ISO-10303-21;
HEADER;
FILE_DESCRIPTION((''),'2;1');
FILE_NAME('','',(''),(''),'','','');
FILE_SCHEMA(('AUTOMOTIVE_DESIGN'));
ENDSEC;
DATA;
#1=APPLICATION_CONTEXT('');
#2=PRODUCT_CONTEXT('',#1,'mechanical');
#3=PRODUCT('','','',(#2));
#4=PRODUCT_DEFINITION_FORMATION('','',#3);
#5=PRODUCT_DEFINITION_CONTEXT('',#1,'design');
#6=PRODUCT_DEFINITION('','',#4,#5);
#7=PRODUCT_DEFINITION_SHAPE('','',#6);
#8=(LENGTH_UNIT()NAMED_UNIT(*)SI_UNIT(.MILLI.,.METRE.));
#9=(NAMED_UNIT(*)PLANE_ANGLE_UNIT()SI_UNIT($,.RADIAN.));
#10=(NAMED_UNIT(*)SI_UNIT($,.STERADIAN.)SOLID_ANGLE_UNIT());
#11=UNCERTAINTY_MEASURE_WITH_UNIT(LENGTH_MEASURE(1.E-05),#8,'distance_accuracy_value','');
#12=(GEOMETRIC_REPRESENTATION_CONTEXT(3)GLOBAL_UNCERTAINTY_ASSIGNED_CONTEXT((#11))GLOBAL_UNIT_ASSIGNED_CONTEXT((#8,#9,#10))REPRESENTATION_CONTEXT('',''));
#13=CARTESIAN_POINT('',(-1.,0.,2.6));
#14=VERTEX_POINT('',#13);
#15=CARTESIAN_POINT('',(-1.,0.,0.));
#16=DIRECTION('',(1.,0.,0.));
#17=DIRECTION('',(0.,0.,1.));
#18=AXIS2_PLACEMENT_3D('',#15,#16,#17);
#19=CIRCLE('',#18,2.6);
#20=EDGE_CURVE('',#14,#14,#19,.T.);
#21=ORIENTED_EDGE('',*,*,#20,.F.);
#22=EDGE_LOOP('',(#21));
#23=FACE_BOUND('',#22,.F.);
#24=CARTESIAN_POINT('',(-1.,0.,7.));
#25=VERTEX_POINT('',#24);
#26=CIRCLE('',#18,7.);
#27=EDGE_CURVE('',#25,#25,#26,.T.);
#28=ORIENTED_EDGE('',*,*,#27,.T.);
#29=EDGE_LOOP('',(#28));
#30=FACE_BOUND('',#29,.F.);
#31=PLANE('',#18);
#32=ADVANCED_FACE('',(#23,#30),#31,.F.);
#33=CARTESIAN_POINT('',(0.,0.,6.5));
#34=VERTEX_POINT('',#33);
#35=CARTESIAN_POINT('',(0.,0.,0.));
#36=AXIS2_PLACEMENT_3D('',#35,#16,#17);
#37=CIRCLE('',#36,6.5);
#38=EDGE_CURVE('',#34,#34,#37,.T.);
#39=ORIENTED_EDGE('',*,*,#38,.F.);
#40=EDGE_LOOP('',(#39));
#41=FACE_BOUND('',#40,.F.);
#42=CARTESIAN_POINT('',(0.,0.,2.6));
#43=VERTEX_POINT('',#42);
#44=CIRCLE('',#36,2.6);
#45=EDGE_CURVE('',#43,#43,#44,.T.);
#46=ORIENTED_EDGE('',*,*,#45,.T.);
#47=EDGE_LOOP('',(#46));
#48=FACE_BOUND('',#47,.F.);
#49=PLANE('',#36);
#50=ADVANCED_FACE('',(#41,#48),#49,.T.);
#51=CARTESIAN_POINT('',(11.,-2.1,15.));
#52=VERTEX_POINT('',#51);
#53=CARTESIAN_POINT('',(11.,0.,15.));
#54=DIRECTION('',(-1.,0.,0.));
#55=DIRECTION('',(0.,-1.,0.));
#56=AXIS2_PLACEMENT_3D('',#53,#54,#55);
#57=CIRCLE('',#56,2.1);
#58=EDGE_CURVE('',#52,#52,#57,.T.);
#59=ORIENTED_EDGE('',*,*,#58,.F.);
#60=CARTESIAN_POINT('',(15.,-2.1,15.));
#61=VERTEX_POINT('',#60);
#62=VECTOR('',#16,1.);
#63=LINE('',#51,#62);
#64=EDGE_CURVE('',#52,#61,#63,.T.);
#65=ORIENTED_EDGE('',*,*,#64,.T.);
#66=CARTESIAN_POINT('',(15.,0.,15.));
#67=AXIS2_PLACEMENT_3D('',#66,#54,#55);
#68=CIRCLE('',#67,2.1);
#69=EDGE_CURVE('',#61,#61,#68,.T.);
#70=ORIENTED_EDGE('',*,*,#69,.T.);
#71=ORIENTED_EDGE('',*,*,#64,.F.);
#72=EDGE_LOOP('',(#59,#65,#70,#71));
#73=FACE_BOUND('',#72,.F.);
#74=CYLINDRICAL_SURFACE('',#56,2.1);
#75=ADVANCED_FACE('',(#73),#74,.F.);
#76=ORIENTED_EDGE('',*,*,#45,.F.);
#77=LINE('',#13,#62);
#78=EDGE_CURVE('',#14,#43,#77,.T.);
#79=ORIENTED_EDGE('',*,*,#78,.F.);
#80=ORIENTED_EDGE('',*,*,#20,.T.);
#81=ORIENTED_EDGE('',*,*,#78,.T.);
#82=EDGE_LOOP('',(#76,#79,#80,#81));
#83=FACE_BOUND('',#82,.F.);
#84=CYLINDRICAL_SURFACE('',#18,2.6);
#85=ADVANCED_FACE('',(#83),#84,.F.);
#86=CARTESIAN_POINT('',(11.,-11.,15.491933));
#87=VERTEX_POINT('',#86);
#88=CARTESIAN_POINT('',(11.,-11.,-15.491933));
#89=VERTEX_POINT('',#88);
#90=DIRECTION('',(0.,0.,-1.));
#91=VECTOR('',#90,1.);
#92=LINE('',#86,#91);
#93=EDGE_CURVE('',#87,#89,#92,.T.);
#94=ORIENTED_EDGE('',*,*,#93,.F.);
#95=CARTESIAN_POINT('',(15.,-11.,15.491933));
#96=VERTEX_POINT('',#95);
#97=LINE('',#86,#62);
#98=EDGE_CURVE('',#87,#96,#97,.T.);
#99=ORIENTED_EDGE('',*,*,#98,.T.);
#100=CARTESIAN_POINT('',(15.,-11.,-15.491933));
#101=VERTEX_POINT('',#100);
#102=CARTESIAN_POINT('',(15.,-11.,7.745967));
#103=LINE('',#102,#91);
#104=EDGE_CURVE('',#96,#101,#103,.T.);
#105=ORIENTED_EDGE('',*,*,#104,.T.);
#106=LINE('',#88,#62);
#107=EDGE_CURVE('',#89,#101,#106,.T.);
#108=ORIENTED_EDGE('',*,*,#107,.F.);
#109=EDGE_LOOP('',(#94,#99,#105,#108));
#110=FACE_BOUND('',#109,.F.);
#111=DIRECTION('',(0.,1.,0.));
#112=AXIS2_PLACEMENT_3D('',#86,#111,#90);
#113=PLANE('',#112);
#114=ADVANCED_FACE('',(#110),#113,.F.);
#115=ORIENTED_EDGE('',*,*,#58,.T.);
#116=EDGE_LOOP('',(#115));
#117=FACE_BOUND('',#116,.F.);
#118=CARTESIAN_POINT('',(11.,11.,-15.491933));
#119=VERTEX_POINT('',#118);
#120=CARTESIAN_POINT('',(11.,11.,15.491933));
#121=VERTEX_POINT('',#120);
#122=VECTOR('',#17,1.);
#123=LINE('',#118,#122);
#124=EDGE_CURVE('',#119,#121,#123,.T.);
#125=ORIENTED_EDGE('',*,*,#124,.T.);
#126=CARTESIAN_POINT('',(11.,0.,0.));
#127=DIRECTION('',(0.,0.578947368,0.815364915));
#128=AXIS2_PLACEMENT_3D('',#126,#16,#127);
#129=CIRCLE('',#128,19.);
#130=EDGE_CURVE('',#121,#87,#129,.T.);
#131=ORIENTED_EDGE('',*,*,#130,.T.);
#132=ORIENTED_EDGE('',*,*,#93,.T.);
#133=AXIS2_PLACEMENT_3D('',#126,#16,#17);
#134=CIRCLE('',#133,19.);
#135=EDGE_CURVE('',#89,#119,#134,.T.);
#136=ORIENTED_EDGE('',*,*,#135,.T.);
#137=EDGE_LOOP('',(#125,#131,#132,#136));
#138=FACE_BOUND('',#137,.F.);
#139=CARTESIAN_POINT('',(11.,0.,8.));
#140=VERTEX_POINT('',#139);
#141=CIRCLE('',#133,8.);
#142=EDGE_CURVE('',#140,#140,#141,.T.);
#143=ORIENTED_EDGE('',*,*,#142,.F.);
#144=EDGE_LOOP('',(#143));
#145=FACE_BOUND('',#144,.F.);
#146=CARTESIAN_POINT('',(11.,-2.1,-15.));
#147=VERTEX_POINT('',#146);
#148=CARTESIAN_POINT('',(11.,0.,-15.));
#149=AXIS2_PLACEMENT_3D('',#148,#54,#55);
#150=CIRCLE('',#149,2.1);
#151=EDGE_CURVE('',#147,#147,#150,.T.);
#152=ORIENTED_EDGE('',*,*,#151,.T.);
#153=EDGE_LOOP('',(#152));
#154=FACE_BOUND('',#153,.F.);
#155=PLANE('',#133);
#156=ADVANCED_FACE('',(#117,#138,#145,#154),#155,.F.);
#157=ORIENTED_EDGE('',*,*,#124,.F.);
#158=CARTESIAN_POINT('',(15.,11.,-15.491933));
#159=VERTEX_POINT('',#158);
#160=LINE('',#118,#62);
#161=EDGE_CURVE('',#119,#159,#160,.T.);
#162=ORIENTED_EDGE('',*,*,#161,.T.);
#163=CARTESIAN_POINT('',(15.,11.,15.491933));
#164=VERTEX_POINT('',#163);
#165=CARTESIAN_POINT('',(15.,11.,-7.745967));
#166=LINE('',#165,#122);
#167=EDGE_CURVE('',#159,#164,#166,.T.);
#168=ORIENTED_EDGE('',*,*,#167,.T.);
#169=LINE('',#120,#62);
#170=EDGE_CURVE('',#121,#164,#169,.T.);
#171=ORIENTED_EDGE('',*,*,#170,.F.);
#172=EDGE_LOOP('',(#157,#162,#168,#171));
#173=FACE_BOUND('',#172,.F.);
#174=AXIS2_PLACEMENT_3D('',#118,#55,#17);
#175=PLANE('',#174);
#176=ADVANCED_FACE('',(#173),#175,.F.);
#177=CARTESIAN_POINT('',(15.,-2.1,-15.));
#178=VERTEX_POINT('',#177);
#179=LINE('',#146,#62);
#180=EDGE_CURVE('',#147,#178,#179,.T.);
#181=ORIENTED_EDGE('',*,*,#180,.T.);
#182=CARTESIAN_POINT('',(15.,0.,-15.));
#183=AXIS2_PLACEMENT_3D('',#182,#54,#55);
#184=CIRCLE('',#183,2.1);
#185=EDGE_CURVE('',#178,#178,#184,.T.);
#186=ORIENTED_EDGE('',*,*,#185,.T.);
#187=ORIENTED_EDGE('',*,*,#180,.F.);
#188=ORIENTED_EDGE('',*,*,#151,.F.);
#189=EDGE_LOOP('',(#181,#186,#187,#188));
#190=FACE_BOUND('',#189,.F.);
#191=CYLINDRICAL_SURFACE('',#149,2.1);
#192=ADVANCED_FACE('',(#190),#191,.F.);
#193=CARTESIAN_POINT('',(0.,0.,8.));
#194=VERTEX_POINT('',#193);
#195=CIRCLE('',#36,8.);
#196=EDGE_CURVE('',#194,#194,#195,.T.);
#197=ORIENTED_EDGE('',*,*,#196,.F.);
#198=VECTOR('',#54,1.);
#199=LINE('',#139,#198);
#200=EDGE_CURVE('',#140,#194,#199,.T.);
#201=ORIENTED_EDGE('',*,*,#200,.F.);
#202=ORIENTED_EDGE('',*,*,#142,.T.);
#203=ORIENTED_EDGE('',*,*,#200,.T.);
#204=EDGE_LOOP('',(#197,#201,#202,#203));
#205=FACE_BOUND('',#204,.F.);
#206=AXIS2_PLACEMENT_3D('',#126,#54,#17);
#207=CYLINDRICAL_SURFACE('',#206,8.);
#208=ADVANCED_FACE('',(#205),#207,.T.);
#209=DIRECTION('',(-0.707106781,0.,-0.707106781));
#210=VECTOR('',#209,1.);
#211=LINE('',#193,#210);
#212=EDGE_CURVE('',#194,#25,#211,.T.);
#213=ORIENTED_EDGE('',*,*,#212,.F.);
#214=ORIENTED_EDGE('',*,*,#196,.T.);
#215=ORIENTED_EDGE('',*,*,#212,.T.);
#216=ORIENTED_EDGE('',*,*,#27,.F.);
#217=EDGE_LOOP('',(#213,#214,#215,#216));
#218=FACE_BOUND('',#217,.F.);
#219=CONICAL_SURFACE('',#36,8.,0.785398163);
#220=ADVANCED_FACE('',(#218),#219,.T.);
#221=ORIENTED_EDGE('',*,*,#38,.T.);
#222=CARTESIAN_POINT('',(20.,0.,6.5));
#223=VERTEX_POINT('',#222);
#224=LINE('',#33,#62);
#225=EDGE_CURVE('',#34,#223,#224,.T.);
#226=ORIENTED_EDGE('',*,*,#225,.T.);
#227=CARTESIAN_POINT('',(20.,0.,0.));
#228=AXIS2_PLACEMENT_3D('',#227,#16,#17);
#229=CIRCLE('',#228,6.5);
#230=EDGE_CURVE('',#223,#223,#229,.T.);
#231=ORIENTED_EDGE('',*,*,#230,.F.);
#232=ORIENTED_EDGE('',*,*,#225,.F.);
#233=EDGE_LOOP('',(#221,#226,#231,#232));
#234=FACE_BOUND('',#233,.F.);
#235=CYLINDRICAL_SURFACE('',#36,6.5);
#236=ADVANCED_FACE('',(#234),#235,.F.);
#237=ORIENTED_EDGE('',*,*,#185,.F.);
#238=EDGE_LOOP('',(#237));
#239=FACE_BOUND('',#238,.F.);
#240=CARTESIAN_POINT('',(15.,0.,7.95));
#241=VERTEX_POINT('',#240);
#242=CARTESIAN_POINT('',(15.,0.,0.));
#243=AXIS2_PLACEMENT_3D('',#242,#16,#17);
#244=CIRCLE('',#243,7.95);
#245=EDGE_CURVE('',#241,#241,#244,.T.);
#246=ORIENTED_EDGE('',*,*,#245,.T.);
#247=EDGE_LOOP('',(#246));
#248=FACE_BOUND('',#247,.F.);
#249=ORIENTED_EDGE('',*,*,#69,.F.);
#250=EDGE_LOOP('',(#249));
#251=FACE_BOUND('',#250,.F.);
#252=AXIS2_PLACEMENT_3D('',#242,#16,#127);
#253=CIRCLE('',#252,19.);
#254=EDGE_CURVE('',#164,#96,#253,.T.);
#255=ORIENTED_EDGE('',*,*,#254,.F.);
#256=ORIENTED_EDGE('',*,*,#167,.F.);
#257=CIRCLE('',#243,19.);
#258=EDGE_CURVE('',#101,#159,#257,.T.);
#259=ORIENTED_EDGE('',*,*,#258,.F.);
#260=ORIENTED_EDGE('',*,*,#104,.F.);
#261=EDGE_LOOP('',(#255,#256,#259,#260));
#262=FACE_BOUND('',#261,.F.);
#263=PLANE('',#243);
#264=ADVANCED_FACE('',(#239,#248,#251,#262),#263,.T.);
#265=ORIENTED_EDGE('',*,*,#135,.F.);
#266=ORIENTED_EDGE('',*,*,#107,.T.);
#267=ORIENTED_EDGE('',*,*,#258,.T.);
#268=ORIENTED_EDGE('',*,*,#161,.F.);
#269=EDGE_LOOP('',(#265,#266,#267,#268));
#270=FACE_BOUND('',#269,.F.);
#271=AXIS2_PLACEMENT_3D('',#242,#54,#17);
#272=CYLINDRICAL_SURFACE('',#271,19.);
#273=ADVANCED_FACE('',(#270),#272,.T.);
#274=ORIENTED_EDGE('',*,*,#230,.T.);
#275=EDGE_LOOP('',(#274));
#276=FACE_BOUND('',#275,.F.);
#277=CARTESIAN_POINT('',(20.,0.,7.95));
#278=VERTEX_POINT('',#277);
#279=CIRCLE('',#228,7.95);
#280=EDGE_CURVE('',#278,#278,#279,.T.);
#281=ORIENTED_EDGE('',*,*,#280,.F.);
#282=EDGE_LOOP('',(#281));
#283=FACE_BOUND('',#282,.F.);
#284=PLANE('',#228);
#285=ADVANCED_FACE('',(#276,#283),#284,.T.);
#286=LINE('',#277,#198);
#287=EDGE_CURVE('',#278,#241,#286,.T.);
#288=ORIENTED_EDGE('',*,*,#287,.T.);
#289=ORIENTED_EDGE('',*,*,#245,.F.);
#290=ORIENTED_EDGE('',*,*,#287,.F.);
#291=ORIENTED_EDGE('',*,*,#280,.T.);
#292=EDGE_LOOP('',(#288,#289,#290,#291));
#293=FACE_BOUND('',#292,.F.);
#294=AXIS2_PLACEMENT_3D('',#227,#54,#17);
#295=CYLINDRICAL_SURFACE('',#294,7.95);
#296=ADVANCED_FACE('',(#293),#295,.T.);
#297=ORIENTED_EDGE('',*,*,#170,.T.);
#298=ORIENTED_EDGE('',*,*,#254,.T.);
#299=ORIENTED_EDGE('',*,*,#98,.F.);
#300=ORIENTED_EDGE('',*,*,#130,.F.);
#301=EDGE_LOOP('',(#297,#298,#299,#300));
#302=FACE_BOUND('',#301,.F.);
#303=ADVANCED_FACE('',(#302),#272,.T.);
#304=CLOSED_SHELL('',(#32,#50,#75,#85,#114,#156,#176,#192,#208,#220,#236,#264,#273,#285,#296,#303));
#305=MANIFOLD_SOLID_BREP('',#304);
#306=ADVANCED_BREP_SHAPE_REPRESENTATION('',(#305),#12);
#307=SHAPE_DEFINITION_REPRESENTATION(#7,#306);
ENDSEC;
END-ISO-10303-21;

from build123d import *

# Parameters (mm, degrees)
F2_R     = 2.1
F3_DEPTH = 9.001
F4_SIZE  = 1


# Not quite as in the source:
# - a feature names something its author has since deleted; it is built from what else it names


with BuildPart() as f1:
    # F0 (on Front) → F1 (revolve)
    with BuildSketch(Plane.XZ):
        Polygon((0, 6.5), (20, 6.5), (20, 7.95), (15, 7.95), (15, 19), (11, 19), (11, 8), (-1, 8), (-1, 2.6), (0, 2.6), align=None)
    revolve(axis=Axis((12.5816260299, 0, 0), (1, 0, 0)))

    # F2 (on face) → F3 (cut, through all)
    with BuildSketch(Plane(origin=(11, 0, 0), x_dir=(0, -1, 0), z_dir=(-1, 0, 0))):
        with Locations((0, 15)):
            Circle(F2_R)
        with Locations((0, -15)):
            Circle(F2_R)
        with BuildLine():
            Line((-11, -15.4919333848), (-11, 15.4919333848))
            ThreePointArc((-11, 15.4919333848), (-19, 0), (-11, -15.4919333848))
        make_face()
        with BuildLine():
            ThreePointArc((19, 0), (16.8819430161, 8.7177978871), (11, 15.4919333848))
            Line((11, 15.4919333848), (11, -15.4919333848))
            ThreePointArc((11, -15.4919333848), (16.8819430161, -8.7177978871), (19, 0))
        make_face()
    extrude(amount=-F3_DEPTH, mode=Mode.SUBTRACT)

    # F4
    f4_edges = [f1.edges().sort_by_distance(p)[0] for p in [
        (-1, 0, -8),
    ]]
    chamfer(f4_edges, length=F4_SIZE)


solid = f1.part
